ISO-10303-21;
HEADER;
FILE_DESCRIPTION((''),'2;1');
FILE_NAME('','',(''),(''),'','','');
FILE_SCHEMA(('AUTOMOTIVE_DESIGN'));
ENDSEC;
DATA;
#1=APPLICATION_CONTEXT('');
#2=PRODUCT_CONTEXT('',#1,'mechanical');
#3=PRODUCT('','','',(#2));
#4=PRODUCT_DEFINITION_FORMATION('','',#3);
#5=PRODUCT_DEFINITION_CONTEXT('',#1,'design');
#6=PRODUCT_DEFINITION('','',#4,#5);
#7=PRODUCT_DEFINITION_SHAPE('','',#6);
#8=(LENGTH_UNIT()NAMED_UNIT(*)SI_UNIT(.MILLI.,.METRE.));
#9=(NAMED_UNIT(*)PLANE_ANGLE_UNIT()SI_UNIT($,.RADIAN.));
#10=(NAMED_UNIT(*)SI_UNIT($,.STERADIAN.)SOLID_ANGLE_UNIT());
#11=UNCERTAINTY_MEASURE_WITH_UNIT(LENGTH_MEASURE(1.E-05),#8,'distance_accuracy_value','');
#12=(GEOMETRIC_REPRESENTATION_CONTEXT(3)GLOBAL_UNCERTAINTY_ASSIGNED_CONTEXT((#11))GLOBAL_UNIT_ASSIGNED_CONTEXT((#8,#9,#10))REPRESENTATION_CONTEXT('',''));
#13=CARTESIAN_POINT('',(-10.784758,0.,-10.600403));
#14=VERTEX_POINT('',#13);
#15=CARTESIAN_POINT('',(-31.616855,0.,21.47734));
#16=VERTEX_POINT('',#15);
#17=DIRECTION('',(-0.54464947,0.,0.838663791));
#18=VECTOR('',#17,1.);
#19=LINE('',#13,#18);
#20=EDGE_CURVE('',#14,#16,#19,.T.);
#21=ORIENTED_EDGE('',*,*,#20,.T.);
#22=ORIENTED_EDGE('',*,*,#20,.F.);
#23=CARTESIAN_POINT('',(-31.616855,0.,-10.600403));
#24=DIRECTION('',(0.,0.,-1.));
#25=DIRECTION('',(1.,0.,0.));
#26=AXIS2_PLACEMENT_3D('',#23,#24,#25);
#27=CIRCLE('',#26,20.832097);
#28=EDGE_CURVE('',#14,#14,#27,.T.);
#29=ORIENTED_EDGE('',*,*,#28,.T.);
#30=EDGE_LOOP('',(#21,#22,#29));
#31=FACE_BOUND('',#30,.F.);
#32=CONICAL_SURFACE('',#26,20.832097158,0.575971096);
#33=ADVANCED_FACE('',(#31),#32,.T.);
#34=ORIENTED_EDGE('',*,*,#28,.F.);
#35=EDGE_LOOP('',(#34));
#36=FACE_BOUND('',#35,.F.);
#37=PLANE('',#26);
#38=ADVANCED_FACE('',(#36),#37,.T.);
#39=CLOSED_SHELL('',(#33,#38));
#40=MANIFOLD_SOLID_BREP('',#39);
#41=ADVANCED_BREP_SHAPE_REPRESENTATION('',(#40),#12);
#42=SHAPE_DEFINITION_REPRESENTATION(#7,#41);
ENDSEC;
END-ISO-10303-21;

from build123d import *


# Not quite as in the source:
# - the program builds the solid bodies; features that only make, move or delete a surface that nothing else refers to are left out


with BuildPart() as f1:
    # F0 (on Front) → F1 (revolve)
    with BuildSketch(Plane.XZ):
        Polygon((-10.7847582549, -10.6004029512), (-31.6168554127, 21.4773397893), (-31.6168554127, -10.6004029512), align=None)
    revolve(axis=Axis((-31.6168554127, 0, 5.438468419), (0, 0, -1)))


solid = f1.part
